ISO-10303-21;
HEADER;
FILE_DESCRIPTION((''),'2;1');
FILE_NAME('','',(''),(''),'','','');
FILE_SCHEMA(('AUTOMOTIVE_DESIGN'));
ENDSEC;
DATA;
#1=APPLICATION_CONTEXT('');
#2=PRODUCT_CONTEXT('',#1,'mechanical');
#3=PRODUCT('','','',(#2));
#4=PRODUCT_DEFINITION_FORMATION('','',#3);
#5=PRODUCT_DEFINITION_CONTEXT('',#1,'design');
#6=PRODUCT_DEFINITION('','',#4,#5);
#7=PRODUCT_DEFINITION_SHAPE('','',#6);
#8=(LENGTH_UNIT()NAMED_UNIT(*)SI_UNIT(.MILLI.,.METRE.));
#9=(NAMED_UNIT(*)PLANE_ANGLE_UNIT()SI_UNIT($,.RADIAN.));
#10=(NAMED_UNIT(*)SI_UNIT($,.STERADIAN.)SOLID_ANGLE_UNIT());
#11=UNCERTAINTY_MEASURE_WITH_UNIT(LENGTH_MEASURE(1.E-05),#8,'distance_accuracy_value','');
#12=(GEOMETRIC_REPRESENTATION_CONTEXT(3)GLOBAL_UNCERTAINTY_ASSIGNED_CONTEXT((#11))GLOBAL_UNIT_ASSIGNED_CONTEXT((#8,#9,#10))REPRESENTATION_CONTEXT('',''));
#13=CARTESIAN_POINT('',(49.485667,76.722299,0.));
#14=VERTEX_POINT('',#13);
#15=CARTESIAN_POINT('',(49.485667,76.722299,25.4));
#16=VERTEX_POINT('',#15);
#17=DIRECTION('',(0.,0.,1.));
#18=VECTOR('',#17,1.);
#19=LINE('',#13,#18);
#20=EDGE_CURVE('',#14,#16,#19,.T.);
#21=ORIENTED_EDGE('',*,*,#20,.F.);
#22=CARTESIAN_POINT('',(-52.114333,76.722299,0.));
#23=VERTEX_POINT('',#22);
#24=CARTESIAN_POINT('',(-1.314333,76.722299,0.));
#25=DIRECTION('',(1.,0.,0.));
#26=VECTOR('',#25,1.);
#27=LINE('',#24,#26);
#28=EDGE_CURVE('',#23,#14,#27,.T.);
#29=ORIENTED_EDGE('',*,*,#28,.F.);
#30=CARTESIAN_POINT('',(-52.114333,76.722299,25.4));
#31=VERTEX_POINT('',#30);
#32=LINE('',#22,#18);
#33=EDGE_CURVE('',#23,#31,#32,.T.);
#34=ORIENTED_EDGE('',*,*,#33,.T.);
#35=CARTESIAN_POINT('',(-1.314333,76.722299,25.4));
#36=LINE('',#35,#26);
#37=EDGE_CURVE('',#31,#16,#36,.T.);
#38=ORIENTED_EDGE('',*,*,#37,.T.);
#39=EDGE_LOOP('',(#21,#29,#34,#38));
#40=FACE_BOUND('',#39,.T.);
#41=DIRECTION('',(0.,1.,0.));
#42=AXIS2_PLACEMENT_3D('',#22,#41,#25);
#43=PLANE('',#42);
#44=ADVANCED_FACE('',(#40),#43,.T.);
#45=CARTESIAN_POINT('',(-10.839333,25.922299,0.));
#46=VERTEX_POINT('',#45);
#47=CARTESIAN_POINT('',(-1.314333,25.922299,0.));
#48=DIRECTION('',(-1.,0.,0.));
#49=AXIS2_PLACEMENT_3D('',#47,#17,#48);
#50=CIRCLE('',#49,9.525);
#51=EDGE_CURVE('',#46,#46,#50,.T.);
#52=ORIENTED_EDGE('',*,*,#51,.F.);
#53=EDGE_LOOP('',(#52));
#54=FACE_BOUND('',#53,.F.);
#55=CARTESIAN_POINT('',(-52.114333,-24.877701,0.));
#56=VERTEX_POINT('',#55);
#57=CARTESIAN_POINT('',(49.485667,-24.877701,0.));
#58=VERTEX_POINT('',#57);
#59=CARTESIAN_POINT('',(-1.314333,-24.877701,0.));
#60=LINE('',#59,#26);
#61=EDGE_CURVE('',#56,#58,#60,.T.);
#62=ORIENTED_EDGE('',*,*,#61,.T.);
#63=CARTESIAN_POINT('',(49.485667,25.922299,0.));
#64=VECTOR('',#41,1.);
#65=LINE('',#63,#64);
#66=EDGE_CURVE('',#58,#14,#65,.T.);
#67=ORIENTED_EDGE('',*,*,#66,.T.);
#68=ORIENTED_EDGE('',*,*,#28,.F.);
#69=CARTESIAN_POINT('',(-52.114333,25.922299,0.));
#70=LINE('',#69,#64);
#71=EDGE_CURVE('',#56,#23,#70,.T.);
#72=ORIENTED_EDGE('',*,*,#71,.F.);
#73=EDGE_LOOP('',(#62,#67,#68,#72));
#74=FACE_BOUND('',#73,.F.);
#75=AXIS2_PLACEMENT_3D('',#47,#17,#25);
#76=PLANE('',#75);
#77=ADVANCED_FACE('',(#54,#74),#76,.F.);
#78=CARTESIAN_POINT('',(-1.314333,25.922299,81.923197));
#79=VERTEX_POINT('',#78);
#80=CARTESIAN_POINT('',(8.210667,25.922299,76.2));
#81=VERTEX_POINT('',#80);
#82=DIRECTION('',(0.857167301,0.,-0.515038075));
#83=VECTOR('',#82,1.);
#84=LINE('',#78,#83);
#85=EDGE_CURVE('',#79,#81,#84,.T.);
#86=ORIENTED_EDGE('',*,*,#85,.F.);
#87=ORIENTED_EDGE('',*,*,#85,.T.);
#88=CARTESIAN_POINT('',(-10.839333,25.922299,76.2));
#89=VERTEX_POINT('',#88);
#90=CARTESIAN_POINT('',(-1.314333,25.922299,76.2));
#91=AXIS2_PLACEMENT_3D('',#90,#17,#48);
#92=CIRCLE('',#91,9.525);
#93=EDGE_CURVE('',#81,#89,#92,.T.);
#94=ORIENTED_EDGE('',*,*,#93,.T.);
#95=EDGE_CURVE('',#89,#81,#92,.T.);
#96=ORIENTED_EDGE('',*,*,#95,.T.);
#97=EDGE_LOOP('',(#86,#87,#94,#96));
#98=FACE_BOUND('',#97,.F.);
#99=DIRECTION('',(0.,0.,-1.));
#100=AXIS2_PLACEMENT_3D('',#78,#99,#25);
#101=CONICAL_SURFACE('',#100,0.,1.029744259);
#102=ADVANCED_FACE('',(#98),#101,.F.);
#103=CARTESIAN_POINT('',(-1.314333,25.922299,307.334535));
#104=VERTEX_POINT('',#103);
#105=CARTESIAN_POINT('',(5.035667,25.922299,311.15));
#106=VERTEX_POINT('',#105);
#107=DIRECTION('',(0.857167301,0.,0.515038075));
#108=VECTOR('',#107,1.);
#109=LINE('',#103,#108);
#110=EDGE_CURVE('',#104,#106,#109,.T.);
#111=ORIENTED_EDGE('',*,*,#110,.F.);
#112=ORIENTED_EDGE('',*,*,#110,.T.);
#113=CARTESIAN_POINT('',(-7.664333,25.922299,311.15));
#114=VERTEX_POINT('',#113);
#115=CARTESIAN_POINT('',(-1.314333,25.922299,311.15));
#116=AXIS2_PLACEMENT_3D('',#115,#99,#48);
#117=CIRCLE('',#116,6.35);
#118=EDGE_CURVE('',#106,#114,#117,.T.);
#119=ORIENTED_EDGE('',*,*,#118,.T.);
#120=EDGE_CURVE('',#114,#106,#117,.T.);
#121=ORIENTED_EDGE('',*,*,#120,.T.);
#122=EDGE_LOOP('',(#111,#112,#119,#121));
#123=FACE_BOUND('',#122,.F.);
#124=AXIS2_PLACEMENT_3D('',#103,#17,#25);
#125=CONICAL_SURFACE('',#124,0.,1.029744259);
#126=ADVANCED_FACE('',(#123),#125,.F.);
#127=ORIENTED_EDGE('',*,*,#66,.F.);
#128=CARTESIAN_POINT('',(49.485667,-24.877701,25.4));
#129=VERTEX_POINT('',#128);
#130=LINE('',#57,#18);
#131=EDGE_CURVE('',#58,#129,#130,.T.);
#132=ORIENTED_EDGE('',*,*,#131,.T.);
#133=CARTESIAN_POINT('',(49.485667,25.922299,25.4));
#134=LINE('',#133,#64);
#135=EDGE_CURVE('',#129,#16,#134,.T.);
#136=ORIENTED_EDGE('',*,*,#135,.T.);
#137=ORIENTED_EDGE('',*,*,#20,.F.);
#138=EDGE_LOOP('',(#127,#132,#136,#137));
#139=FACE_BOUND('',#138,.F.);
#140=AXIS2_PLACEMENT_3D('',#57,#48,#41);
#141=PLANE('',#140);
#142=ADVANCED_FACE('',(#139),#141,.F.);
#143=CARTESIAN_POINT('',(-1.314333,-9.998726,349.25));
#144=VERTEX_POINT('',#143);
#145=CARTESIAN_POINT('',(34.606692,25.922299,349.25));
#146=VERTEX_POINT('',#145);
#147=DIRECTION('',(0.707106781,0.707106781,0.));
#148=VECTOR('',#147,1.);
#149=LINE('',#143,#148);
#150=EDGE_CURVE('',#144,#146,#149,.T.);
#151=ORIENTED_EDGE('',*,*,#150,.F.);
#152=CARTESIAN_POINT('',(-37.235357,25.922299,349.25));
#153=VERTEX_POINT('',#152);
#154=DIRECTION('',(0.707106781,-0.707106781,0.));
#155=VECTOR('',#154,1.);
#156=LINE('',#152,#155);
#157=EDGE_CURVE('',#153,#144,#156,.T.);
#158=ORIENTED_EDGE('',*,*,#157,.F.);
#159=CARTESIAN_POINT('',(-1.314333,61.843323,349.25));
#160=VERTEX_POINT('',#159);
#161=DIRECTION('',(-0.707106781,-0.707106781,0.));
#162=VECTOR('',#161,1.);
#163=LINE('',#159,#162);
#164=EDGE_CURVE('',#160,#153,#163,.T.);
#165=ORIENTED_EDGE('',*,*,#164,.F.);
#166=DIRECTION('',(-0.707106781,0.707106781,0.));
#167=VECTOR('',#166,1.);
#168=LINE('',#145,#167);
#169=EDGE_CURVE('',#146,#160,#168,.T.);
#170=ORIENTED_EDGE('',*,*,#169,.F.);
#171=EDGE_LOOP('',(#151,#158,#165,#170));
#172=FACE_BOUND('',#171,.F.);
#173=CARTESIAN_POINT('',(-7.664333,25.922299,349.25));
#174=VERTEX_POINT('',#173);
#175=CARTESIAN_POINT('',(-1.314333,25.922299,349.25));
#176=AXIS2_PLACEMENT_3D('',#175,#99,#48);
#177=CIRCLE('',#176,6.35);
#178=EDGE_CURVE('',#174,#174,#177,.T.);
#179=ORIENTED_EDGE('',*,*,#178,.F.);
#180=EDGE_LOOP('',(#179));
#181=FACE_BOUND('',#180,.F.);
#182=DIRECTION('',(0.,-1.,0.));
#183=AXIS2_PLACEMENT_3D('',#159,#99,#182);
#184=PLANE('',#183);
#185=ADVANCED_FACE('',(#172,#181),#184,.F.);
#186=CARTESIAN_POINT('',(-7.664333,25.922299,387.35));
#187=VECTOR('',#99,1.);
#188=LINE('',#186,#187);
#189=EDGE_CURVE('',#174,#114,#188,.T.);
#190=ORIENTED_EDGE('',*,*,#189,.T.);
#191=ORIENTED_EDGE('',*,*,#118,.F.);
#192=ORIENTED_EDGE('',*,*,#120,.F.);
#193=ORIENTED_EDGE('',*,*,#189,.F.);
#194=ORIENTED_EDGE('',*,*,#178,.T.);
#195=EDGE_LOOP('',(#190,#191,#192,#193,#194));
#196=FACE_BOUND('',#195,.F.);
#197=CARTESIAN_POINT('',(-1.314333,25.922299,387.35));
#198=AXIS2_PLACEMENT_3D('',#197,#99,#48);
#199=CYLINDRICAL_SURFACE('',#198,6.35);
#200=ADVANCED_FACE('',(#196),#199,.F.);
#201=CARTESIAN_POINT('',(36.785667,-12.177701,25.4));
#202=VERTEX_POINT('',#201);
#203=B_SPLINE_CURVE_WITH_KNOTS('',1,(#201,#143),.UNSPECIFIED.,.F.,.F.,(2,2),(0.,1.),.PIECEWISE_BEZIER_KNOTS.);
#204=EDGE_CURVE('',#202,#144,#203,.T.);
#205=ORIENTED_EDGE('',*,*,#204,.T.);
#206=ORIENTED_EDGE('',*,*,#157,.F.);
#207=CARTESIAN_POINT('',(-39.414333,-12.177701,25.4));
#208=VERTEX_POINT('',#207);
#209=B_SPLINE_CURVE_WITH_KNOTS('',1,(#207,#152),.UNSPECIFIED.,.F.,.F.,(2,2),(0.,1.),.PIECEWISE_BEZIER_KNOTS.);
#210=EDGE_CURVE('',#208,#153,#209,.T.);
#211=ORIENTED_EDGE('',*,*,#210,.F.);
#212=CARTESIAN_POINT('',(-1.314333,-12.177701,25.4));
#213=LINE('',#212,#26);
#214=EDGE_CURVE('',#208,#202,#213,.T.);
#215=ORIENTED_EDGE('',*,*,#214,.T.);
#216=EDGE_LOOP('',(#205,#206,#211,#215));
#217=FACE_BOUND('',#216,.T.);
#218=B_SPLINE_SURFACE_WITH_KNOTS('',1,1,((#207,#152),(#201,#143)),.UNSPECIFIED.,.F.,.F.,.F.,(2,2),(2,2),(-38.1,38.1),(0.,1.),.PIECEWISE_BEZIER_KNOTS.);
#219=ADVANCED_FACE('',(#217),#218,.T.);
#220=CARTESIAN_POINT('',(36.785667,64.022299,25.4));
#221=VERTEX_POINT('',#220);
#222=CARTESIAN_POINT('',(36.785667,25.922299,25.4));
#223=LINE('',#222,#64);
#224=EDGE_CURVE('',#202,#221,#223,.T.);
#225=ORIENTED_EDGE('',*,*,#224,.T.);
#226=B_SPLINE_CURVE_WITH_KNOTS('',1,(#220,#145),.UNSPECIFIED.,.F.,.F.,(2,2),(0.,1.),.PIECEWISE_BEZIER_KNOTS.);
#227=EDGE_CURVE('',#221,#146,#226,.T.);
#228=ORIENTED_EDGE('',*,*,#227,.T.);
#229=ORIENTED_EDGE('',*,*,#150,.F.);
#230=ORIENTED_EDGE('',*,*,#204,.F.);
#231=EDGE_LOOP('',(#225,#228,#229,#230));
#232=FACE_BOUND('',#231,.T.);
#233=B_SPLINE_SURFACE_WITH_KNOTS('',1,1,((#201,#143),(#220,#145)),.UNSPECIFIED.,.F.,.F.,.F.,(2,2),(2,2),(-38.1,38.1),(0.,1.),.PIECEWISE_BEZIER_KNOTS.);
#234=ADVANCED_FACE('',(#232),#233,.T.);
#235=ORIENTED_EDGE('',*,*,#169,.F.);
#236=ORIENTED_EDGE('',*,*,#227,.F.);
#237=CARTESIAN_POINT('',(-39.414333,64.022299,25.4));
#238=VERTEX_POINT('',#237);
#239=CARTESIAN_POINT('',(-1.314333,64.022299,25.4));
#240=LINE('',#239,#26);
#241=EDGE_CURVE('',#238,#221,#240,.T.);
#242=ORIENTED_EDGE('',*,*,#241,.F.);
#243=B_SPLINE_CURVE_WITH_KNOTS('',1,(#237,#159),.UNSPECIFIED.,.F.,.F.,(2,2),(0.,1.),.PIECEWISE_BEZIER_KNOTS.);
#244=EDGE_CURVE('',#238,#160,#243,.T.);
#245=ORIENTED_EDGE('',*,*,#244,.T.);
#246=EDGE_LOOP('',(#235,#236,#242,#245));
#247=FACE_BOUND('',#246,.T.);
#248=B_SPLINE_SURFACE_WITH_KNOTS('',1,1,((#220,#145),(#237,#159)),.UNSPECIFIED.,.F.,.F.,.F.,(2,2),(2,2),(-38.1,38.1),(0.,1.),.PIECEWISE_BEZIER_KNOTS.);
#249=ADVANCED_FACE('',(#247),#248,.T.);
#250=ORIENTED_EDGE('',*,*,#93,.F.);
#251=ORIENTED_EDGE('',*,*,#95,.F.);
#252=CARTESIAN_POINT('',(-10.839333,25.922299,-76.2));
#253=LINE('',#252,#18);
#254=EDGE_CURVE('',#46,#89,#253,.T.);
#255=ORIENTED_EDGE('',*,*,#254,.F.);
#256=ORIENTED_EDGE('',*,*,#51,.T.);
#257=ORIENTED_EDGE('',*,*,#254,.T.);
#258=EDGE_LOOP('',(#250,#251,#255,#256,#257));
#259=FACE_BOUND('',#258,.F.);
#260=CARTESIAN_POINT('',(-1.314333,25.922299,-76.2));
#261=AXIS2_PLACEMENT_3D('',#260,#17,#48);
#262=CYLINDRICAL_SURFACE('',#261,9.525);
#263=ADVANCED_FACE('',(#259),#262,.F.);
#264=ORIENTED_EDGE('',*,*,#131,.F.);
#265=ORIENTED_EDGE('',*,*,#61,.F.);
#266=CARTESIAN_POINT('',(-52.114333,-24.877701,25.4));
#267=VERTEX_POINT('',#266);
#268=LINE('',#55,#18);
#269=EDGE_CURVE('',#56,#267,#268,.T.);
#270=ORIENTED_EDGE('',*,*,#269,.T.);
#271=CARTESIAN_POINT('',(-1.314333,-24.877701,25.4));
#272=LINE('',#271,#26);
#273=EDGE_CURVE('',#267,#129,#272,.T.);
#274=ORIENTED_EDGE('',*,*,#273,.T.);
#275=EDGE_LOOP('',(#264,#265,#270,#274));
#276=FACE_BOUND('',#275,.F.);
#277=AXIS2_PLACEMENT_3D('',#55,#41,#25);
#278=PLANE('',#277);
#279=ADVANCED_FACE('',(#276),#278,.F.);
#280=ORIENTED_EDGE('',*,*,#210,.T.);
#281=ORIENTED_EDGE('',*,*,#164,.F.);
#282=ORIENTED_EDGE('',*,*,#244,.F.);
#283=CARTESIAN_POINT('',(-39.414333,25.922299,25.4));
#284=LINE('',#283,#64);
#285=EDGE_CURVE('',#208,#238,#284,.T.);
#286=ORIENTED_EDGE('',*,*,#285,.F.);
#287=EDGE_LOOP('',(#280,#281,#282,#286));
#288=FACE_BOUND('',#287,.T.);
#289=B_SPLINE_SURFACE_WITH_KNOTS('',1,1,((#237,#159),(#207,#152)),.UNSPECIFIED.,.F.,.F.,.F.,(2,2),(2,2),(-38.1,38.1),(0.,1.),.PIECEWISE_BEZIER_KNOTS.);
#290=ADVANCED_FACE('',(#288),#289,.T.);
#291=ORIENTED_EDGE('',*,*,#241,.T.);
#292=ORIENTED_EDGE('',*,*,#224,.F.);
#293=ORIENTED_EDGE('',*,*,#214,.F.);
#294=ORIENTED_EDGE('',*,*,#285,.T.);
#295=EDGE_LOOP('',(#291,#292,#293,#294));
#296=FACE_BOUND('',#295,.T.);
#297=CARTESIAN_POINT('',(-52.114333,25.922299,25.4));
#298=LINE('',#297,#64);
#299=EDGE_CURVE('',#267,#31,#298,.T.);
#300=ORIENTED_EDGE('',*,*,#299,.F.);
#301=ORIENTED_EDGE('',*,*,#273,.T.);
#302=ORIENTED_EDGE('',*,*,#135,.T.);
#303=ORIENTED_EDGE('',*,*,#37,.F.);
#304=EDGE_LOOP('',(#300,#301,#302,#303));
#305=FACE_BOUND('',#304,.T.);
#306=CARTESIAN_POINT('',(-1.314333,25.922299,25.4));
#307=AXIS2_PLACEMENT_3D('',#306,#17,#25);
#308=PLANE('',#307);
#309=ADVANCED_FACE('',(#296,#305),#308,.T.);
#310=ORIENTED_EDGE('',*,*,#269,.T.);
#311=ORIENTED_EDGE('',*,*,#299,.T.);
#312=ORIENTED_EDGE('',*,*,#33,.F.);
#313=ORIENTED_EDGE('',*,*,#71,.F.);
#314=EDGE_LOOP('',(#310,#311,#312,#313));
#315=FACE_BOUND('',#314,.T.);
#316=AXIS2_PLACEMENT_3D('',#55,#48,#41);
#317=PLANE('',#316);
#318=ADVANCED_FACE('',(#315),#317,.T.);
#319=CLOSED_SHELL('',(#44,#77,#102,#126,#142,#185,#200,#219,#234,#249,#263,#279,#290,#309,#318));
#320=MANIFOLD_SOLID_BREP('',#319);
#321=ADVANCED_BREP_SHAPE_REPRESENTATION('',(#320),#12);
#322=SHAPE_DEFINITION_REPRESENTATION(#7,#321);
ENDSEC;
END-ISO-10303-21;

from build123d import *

# Parameters (mm, degrees)
F0_W     = 101.6
F0_H     = 101.6
F0_W_2   = 76.2
F0_H_2   = 76.2
F1_DEPTH = 25.4
F2_W     = 76.2
F2_H     = 76.2
F6_D     = 19.05
F6_DEPTH = 76.2
F6_TIP   = 5.7231973962
F7_D     = 12.7
F7_DEPTH = 38.1
F7_TIP   = 3.8154649308


with BuildPart() as f1:
    # F0 (on Top) → F1 (new body)
    with BuildSketch(Plane.XY):
        with Locations((-1.3143327087, 25.9222988339)):
            Rectangle(F0_W, F0_H)
        with Locations((-1.3143327087, 25.9222988339)):
            Rectangle(F0_W_2, F0_H_2, mode=Mode.SUBTRACT)
        with Locations((-1.3143327087, 25.9222988339)):
            Rectangle(F0_W_2, F0_H_2)
    extrude(amount=F1_DEPTH)

    # F2 (on face) → F5 section 0
    with BuildSketch(Plane.XY.offset(25.4)):
        with Locations((-1.3143327087, 25.9222988339)):
            Rectangle(F2_W, F2_H)
    # F4 (on offset) → F5 section 1
    with BuildSketch(Plane.XY.offset(349.25)):
        Polygon((-1.3143327087, -9.9987256503), (34.6066917756, 25.9222988339), (-1.3143327087, 61.8433233182), (-37.235357193, 25.9222988339), align=None)
    loft()

    # F6
    with Locations(Plane(origin=(0, 0, 0), x_dir=(1, 0, 0), z_dir=(0, 0, -1))):
        with Locations((-1.3143327087, -25.9222988339)):
            Hole(F6_D / 2, depth=F6_DEPTH)
            with Locations((0, 0, -(F6_DEPTH + F6_TIP / 2))):  # 118° drill point
                Cone(0, F6_D / 2, F6_TIP, mode=Mode.SUBTRACT)

    # F7
    with Locations(Plane.XY.offset(349.25)):
        with Locations((-1.3143327087, 25.9222988339)):
            Hole(F7_D / 2, depth=F7_DEPTH)
            with Locations((0, 0, -(F7_DEPTH + F7_TIP / 2))):  # 118° drill point
                Cone(0, F7_D / 2, F7_TIP, mode=Mode.SUBTRACT)


solid = f1.part
